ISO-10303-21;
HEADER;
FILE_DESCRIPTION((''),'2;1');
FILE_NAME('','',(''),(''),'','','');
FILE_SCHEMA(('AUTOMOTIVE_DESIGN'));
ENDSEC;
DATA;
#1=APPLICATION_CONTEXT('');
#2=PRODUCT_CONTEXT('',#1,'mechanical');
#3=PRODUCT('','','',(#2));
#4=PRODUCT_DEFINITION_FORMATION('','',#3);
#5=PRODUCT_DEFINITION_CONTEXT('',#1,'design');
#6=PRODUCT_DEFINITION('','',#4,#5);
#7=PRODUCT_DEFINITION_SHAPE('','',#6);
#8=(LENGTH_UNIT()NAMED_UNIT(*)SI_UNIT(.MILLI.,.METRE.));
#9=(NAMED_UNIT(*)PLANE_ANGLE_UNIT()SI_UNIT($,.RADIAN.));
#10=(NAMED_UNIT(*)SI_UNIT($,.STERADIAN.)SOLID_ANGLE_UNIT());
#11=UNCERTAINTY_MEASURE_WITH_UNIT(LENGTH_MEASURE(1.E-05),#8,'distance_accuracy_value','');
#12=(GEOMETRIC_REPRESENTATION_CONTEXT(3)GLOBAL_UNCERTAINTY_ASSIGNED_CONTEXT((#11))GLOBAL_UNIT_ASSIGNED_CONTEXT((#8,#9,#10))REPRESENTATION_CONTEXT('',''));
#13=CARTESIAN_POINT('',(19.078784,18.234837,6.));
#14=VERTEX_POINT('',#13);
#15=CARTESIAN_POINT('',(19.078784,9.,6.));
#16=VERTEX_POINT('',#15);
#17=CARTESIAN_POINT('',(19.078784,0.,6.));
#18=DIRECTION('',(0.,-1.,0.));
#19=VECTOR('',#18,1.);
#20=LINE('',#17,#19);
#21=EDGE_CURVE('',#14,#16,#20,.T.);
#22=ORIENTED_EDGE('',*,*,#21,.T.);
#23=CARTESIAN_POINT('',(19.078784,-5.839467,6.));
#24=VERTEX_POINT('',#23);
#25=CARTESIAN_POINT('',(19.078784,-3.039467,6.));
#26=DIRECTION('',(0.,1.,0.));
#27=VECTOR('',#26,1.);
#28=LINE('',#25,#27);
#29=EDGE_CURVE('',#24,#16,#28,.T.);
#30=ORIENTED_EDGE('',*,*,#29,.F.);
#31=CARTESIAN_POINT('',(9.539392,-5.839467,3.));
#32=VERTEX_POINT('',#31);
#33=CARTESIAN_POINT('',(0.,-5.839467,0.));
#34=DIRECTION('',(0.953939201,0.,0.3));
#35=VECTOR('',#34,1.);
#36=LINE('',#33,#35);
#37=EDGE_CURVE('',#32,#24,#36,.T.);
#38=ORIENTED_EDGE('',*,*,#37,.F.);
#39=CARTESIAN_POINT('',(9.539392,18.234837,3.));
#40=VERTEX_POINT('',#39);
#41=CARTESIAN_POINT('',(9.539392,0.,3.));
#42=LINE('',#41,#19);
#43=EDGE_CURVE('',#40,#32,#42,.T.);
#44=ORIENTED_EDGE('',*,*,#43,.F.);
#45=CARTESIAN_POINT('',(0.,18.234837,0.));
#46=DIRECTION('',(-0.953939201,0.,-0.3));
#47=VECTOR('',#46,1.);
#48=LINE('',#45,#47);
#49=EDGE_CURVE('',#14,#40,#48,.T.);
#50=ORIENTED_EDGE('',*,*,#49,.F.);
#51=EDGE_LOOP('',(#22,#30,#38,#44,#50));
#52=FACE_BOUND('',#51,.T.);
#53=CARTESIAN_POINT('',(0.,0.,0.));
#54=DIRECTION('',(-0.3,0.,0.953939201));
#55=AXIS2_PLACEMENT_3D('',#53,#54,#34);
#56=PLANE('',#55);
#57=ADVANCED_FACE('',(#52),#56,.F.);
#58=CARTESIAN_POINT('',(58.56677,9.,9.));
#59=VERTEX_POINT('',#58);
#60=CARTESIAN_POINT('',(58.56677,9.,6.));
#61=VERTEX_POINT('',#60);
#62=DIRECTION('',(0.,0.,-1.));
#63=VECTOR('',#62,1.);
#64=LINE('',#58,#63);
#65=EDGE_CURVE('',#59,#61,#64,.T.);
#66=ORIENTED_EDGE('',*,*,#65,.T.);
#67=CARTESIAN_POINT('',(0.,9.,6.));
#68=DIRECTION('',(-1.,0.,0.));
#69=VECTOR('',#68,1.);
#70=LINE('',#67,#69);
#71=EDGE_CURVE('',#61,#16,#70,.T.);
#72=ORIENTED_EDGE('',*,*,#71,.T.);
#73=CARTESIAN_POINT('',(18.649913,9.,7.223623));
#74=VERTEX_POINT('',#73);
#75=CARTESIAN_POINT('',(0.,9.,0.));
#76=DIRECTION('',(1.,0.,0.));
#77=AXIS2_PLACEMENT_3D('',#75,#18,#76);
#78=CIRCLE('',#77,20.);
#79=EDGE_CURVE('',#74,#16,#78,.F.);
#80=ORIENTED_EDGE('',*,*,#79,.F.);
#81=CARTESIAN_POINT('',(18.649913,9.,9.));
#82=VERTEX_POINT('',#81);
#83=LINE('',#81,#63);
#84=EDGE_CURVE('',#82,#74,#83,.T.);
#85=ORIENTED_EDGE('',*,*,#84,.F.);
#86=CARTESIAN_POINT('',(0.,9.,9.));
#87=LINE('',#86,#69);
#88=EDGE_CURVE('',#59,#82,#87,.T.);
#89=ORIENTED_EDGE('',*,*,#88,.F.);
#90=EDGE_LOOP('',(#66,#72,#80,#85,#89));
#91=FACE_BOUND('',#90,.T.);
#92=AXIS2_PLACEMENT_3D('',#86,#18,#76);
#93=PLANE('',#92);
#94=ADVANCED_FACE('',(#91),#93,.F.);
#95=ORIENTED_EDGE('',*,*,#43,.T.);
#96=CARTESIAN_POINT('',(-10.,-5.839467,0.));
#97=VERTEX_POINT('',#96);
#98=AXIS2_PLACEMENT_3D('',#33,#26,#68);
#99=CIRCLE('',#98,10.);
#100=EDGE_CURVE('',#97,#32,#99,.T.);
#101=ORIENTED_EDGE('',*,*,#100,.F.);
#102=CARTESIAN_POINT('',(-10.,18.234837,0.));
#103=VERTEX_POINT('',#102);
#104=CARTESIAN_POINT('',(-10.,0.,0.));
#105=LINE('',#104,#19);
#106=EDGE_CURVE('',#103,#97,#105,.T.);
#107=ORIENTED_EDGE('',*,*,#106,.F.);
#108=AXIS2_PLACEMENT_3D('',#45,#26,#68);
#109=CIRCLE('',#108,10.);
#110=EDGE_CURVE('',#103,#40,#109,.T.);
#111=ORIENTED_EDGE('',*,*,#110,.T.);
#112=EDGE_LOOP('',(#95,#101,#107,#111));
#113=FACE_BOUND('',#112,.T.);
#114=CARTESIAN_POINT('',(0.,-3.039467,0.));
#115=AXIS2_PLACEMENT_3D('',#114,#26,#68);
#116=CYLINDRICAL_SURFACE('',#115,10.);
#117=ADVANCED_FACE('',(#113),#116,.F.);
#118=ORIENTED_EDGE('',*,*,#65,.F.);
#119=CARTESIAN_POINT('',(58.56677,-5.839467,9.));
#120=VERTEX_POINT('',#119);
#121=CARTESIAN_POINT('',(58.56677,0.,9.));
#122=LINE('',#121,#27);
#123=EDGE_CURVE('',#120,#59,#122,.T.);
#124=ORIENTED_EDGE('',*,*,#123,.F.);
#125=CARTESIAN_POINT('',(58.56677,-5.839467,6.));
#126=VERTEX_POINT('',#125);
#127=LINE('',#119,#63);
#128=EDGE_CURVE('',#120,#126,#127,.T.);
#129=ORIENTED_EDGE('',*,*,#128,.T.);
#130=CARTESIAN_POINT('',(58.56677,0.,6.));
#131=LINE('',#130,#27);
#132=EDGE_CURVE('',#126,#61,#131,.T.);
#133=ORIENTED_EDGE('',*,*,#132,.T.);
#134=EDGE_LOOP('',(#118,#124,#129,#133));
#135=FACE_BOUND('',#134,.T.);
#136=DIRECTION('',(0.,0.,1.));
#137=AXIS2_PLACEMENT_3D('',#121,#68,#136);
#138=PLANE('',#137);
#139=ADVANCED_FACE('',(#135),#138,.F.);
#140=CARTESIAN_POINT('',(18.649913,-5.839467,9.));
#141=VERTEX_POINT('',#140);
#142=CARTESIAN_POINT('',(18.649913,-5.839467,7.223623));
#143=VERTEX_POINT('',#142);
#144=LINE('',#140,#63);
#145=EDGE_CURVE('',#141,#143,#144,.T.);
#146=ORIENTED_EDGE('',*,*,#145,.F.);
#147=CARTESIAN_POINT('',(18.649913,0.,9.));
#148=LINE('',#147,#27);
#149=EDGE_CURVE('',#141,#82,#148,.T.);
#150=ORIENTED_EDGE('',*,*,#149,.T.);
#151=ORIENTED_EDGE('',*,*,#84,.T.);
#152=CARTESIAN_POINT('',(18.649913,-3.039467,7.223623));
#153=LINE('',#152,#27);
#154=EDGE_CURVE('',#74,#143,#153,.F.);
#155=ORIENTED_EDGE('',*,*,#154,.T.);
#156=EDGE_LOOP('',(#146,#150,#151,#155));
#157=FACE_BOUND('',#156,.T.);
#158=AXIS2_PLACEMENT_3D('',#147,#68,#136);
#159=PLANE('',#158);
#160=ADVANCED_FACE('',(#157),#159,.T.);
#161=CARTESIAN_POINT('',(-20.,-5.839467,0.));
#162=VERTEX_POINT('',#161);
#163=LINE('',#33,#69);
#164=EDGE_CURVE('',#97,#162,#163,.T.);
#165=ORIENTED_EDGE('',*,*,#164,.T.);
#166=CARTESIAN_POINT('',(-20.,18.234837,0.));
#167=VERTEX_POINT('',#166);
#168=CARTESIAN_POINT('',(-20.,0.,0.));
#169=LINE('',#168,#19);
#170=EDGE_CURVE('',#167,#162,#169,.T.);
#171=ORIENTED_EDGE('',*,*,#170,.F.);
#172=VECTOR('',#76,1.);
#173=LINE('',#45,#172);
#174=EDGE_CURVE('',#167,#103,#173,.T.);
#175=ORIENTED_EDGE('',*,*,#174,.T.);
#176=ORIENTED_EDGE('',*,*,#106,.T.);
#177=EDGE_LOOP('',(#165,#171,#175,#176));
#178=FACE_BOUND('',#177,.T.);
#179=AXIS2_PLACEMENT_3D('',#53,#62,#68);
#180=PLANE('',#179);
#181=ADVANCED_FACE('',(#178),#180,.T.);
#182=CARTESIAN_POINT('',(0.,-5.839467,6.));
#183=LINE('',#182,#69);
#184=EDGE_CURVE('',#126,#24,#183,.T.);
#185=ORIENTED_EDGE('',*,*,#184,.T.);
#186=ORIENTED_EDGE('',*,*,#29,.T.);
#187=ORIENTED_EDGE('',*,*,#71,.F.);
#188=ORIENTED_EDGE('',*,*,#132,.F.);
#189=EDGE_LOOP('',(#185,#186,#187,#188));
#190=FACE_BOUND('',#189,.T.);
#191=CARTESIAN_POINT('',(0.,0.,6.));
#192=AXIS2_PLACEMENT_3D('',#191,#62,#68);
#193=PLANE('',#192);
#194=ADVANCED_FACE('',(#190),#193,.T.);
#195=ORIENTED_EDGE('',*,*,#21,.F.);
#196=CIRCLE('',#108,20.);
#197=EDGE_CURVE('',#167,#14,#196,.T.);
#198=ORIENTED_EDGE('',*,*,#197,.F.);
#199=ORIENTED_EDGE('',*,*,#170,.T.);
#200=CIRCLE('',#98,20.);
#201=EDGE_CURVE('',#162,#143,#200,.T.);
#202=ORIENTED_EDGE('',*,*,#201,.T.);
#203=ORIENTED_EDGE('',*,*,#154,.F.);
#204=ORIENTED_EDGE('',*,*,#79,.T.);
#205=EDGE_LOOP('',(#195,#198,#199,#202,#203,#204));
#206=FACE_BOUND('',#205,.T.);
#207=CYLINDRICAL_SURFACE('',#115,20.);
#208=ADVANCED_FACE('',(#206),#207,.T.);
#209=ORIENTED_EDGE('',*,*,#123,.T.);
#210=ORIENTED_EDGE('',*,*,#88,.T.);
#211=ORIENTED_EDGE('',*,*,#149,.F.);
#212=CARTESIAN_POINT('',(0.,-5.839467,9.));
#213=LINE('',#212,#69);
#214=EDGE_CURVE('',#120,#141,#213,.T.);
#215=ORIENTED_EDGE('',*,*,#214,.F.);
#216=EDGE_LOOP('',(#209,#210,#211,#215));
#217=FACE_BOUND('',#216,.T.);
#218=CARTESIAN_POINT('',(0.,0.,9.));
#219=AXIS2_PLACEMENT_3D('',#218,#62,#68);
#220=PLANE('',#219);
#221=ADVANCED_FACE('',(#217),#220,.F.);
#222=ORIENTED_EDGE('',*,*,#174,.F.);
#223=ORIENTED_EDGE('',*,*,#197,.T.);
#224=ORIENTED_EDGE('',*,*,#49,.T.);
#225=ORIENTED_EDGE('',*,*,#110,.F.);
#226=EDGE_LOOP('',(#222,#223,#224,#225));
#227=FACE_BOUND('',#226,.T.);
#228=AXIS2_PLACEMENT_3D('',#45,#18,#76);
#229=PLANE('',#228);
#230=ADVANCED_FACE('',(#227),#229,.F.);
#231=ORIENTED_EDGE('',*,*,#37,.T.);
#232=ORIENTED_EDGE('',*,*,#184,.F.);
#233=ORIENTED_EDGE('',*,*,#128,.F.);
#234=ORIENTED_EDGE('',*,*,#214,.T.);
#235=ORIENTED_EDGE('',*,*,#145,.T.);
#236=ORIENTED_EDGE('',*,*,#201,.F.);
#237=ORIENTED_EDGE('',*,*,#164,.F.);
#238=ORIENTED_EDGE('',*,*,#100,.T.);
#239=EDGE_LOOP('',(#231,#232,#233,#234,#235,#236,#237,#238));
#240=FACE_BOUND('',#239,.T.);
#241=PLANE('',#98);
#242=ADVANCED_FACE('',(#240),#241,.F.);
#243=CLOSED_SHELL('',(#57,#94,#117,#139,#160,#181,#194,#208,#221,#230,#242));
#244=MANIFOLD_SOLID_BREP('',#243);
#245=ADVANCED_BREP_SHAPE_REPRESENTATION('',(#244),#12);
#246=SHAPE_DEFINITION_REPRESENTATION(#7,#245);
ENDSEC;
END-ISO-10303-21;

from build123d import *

# Parameters (mm, degrees)
SKETCH1_W              = 10
SKETCH1_H              = 24.07430416
REVOLVE2_ANGLE         = 180
BOSS_EXTRUDE1_START    = 6
SKETCH1_7_W            = 39.916856905
SKETCH1_7_H            = 14.839467349
BOSS_EXTRUDE1_DEPTH    = 3
CUT_REVOLVE2_START     = -19.078784028
CUT_REVOLVE2_OUTLINE_W = 24.07430416
CUT_REVOLVE2_OUTLINE_H = 7
CUT_REVOLVE2_DEPTH     = 39.078784028


with BuildPart() as part:
    # Sketch1 → Revolve2 (revolve)
    with BuildSketch(Plane.XY):
        with Locations((15, 6.197684731)):
            Rectangle(SKETCH1_W, SKETCH1_H)
    revolve(axis=Axis((0, -3.039467349, 0), (0, -1, 0)), revolution_arc=REVOLVE2_ANGLE)

    # Sketch1<7> → Boss-Extrude1 (add)
    with BuildSketch(Plane.XY.offset(BOSS_EXTRUDE1_START)):
        with Locations((38.608341788, 1.580266325)):
            Rectangle(SKETCH1_7_W, SKETCH1_7_H)
    extrude(amount=BOSS_EXTRUDE1_DEPTH)

    # Cut-Revolve2: read off the stored shape, not the designer's step
    # Cut-Revolve2 outline → Cut-Revolve2 (cut)
    with BuildSketch(Plane(origin=(0, 0, 0), x_dir=(0, 1, 0), z_dir=(0.9539392014169458, 0, 0.29999999999999993)).offset(CUT_REVOLVE2_START)):
        with Locations((6.197684731, -3.5)):
            Rectangle(CUT_REVOLVE2_OUTLINE_W, CUT_REVOLVE2_OUTLINE_H)
    extrude(amount=CUT_REVOLVE2_DEPTH, mode=Mode.SUBTRACT)


solid = part.part
